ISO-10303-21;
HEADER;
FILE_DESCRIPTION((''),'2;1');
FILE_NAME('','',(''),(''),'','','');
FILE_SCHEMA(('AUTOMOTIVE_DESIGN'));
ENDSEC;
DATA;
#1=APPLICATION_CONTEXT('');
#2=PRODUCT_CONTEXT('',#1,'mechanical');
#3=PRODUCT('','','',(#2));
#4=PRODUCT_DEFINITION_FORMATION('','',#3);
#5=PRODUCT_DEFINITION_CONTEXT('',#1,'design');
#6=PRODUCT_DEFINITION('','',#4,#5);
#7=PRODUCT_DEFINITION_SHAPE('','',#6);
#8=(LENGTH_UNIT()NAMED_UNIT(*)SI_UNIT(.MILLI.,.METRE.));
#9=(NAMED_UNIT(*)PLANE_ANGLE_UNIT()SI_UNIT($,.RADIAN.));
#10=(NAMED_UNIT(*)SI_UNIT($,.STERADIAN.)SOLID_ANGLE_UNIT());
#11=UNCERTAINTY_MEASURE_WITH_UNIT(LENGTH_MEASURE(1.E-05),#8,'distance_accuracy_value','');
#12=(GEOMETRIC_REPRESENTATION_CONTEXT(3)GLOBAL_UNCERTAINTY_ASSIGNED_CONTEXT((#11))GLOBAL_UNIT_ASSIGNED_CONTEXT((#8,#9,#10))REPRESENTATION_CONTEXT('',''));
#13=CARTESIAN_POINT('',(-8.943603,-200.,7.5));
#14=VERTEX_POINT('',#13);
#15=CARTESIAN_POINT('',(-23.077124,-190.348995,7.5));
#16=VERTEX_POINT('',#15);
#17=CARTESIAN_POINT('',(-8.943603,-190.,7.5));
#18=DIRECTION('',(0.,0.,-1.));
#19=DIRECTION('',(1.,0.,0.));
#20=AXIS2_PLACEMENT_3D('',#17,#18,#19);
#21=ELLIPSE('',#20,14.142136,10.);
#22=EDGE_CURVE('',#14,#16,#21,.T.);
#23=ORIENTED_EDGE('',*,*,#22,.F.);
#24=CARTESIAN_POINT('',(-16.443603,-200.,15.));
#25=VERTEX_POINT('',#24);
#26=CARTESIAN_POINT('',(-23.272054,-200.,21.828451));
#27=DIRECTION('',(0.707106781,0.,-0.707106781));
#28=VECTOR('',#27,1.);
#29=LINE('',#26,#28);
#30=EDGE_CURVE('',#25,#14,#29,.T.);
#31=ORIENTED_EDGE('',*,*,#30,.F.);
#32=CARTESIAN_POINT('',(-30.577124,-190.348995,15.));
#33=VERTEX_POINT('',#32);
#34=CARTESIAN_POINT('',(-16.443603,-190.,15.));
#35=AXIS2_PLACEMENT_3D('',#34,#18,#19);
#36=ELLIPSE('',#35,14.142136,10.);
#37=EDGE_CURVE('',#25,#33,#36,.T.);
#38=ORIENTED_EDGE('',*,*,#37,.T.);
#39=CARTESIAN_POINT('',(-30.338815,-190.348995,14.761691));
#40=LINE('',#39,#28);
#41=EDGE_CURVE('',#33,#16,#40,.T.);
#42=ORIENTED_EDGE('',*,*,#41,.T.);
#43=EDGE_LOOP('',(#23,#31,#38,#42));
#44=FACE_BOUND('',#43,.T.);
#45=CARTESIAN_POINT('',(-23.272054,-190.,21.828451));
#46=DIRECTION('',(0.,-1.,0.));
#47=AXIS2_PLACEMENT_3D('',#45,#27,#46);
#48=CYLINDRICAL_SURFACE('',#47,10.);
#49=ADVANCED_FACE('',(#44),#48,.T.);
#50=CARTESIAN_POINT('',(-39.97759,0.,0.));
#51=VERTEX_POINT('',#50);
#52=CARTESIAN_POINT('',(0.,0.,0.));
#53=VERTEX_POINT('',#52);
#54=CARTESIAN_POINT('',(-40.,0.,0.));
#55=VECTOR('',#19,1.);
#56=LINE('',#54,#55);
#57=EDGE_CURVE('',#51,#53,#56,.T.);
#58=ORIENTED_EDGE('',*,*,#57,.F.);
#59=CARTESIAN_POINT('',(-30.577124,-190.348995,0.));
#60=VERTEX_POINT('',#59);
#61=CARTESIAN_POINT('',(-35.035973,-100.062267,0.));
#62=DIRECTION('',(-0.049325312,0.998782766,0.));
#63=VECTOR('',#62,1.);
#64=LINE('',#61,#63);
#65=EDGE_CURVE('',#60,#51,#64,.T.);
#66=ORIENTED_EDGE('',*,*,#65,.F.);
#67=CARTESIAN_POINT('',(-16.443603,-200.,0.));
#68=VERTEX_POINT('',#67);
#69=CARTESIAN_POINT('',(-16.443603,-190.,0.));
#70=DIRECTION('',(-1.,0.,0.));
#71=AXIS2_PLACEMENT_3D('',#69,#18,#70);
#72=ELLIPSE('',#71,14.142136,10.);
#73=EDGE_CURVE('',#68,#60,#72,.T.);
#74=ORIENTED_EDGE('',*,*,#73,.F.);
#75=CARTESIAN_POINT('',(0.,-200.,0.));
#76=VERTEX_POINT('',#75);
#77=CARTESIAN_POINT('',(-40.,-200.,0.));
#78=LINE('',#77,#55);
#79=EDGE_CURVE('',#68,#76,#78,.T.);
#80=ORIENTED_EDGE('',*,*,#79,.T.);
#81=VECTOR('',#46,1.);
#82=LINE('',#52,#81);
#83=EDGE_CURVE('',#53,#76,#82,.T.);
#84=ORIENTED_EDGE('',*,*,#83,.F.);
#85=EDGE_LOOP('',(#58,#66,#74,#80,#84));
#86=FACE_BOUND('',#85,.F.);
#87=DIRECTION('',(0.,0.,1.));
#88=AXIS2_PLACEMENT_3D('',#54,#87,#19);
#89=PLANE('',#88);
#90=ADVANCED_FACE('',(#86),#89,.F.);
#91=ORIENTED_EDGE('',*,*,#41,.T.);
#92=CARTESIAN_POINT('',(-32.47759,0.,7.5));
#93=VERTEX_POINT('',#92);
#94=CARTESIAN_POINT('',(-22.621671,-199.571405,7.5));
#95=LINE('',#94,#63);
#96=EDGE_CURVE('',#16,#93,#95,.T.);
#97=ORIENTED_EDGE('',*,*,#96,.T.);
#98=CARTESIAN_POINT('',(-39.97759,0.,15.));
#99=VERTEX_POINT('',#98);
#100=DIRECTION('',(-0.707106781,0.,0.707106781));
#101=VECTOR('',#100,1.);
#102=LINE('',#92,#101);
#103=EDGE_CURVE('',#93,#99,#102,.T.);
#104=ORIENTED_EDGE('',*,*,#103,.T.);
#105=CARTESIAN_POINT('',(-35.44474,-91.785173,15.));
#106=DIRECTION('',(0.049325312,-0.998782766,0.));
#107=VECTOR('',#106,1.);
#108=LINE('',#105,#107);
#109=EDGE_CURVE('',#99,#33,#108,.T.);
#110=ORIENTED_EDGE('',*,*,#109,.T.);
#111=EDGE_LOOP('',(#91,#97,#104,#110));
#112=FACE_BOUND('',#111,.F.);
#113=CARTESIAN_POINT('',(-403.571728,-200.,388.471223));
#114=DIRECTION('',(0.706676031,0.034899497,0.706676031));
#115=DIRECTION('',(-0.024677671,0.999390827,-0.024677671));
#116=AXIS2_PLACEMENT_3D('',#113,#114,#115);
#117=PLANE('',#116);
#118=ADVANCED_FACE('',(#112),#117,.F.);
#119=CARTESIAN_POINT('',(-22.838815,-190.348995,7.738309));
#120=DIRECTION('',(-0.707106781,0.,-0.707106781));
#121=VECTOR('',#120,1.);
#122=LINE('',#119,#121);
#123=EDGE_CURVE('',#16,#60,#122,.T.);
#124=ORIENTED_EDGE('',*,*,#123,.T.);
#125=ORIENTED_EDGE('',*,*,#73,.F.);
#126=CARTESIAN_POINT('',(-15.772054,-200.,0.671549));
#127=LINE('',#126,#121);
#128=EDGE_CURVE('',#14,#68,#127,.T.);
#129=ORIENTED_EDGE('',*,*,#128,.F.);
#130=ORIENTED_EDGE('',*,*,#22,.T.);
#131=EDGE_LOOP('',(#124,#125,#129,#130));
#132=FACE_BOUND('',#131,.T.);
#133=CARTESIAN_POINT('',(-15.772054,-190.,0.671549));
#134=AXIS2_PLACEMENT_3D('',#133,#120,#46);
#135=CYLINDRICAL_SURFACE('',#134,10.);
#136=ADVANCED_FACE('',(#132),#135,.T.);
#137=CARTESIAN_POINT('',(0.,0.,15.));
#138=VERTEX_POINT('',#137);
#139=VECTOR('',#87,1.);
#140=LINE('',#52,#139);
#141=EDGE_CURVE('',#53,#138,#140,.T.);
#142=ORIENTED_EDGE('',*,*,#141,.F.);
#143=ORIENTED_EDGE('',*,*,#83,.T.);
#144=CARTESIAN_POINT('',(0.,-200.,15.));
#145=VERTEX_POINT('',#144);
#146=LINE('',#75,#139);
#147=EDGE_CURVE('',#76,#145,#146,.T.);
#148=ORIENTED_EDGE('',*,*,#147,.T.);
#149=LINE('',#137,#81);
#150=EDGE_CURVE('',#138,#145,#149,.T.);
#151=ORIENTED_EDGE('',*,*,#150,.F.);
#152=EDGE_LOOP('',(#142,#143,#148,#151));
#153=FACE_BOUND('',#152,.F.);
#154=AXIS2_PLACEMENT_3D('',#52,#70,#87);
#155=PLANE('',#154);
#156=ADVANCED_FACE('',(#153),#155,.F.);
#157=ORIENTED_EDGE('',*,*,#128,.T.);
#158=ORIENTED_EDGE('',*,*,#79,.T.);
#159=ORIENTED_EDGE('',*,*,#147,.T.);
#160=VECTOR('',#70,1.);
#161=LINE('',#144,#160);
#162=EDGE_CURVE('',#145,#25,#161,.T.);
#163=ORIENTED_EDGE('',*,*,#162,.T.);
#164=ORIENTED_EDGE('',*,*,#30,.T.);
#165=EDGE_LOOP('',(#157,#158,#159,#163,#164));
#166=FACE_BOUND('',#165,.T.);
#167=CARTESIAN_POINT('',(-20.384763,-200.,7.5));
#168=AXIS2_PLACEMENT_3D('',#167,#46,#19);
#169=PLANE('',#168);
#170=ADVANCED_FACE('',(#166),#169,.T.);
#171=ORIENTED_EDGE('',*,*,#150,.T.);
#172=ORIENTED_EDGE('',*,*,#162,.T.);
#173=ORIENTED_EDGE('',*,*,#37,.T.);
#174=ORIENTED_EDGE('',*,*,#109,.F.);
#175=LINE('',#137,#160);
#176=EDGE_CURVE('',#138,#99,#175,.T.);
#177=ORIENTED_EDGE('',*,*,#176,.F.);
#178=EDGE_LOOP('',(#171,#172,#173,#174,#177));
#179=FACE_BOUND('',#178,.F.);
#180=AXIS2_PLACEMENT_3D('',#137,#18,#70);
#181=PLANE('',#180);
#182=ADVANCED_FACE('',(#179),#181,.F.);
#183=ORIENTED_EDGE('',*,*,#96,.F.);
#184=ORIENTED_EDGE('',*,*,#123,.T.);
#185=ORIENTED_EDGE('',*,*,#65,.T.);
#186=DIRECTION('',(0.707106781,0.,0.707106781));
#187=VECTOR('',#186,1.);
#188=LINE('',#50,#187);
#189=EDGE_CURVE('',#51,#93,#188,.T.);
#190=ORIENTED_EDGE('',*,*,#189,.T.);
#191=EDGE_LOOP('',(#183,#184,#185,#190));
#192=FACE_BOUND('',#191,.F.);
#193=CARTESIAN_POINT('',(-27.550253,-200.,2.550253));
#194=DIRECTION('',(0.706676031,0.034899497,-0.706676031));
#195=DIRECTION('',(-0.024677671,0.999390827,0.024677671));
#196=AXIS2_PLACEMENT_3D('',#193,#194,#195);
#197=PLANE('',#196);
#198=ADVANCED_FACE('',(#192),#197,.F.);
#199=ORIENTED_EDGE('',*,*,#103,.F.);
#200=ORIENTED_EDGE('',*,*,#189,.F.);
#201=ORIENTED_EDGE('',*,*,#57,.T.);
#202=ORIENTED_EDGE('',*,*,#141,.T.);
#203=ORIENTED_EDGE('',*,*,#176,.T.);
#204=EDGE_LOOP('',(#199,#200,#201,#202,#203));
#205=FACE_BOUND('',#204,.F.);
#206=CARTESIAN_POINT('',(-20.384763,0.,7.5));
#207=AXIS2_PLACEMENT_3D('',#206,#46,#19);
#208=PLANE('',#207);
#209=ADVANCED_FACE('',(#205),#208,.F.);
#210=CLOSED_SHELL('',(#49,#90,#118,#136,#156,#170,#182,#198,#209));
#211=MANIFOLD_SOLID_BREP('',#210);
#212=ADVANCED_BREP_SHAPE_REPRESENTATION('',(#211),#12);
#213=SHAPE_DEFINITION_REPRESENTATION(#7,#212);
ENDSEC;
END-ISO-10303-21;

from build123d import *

# Parameters (mm, degrees)
F1_DEPTH     = 200
F2_T1_DEPTH  = 531.7746698901
F2_T3_DEPTH  = 531.7746698901
F2_T9_DEPTH  = 1052.9427380625
F2_T14_DEPTH = 1052.9427380625
F3_R         = 10


# Not quite as in the source:
# - a fillet or chamfer that OpenCascade refuses, or shapes differently, is made with other operations: its cross-section is extruded or revolved along the edge and cut away or added


with BuildPart() as f1:
    # F0 (on Front) → F1 (new body)
    with BuildSketch(Plane.XZ):
        Polygon((-25, 0), (0, 0), (0, 15), (-40, 15), (-32.5, 7.5), (-40, 0), align=None)
    extrude(amount=F1_DEPTH)

    # F2: chamfer of 7 x 200.4537729804 on 2 edges, made by hand

    # F2_s2 → F2_t1 (cut)
    with BuildSketch(Plane(origin=(-396.0214751426, 0, 396.0214751426), x_dir=(0, 1, 0), z_dir=(0.7071067812, 0, -0.7071067812))):
        Polygon((-200, -10.6776695297), (0.4537729804, -17.6776695297), (-200, -17.6776695297), align=None)
    extrude(amount=F2_T1_DEPTH, mode=Mode.SUBTRACT)

    # F2_s4 → F2_t3 (cut)
    with BuildSketch(Plane(origin=(-12.5, 0, -12.5), x_dir=(0, 1, 0), z_dir=(-0.7071067812, 0, -0.7071067812))):
        Polygon((-200, -21.2842712475), (0.4537729804, -28.2842712475), (-200, -28.2842712475), align=None)
    extrude(amount=F2_T3_DEPTH, mode=Mode.SUBTRACT)


with BuildPart() as f2_tool7:
    # F2_s8 → F2_t9 (new body)
    with BuildSketch(Plane(origin=(-396.0214751426, 0, 396.0214751426), x_dir=(0, 1, 0), z_dir=(0.7071067812, 0, -0.7071067812))):
        Polygon((-200, -10.6776695297), (0.4537729804, -17.6776695297), (-200, -17.6776695297), align=None)
    extrude(amount=F2_T9_DEPTH)

    split(bisect_by=Plane.XY, keep=Keep.TOP)

    split(bisect_by=Plane(origin=(-20, 0, 20), x_dir=(0, 1, 0), z_dir=(0.7071067812, 0, -0.7071067812)), keep=Keep.TOP)


with BuildPart() as f2_tool12:
    # F2_s13 → F2_t14 (new body)
    with BuildSketch(Plane(origin=(356.0214751426, 0, 356.0214751426), x_dir=(0, 1, 0), z_dir=(-0.7071067812, 0, -0.7071067812))):
        Polygon((-200, -21.2842712475), (0.4537729804, -28.2842712475), (-200, -28.2842712475), align=None)
    extrude(amount=F2_T14_DEPTH)

    split(bisect_by=Plane(origin=(-12.5, 0, -12.5), x_dir=(0, 1, 0), z_dir=(0.7071067812, 0, 0.7071067812)), keep=Keep.TOP)

    split(bisect_by=Plane.XY.offset(15), keep=Keep.BOTTOM)


with BuildPart() as f2_tool7_1:
    add(f2_tool7.part)

    # F2_t17: intersect F2_tool12
    add(f2_tool12.part, mode=Mode.INTERSECT)


with BuildPart() as f1_1:
    add(f1.part)

    # F2_t5: cut F2_tool7
    add(f2_tool7_1.part, mode=Mode.SUBTRACT)

    # F3
    f3_edges = [f1_1.edges().sort_by_distance(p)[0] for p in [
        (-26.350505, -200, 11.25),
        (-26.350505, -200, 3.75),
    ]]
    fillet(f3_edges, radius=F3_R)


solid = f1_1.part
